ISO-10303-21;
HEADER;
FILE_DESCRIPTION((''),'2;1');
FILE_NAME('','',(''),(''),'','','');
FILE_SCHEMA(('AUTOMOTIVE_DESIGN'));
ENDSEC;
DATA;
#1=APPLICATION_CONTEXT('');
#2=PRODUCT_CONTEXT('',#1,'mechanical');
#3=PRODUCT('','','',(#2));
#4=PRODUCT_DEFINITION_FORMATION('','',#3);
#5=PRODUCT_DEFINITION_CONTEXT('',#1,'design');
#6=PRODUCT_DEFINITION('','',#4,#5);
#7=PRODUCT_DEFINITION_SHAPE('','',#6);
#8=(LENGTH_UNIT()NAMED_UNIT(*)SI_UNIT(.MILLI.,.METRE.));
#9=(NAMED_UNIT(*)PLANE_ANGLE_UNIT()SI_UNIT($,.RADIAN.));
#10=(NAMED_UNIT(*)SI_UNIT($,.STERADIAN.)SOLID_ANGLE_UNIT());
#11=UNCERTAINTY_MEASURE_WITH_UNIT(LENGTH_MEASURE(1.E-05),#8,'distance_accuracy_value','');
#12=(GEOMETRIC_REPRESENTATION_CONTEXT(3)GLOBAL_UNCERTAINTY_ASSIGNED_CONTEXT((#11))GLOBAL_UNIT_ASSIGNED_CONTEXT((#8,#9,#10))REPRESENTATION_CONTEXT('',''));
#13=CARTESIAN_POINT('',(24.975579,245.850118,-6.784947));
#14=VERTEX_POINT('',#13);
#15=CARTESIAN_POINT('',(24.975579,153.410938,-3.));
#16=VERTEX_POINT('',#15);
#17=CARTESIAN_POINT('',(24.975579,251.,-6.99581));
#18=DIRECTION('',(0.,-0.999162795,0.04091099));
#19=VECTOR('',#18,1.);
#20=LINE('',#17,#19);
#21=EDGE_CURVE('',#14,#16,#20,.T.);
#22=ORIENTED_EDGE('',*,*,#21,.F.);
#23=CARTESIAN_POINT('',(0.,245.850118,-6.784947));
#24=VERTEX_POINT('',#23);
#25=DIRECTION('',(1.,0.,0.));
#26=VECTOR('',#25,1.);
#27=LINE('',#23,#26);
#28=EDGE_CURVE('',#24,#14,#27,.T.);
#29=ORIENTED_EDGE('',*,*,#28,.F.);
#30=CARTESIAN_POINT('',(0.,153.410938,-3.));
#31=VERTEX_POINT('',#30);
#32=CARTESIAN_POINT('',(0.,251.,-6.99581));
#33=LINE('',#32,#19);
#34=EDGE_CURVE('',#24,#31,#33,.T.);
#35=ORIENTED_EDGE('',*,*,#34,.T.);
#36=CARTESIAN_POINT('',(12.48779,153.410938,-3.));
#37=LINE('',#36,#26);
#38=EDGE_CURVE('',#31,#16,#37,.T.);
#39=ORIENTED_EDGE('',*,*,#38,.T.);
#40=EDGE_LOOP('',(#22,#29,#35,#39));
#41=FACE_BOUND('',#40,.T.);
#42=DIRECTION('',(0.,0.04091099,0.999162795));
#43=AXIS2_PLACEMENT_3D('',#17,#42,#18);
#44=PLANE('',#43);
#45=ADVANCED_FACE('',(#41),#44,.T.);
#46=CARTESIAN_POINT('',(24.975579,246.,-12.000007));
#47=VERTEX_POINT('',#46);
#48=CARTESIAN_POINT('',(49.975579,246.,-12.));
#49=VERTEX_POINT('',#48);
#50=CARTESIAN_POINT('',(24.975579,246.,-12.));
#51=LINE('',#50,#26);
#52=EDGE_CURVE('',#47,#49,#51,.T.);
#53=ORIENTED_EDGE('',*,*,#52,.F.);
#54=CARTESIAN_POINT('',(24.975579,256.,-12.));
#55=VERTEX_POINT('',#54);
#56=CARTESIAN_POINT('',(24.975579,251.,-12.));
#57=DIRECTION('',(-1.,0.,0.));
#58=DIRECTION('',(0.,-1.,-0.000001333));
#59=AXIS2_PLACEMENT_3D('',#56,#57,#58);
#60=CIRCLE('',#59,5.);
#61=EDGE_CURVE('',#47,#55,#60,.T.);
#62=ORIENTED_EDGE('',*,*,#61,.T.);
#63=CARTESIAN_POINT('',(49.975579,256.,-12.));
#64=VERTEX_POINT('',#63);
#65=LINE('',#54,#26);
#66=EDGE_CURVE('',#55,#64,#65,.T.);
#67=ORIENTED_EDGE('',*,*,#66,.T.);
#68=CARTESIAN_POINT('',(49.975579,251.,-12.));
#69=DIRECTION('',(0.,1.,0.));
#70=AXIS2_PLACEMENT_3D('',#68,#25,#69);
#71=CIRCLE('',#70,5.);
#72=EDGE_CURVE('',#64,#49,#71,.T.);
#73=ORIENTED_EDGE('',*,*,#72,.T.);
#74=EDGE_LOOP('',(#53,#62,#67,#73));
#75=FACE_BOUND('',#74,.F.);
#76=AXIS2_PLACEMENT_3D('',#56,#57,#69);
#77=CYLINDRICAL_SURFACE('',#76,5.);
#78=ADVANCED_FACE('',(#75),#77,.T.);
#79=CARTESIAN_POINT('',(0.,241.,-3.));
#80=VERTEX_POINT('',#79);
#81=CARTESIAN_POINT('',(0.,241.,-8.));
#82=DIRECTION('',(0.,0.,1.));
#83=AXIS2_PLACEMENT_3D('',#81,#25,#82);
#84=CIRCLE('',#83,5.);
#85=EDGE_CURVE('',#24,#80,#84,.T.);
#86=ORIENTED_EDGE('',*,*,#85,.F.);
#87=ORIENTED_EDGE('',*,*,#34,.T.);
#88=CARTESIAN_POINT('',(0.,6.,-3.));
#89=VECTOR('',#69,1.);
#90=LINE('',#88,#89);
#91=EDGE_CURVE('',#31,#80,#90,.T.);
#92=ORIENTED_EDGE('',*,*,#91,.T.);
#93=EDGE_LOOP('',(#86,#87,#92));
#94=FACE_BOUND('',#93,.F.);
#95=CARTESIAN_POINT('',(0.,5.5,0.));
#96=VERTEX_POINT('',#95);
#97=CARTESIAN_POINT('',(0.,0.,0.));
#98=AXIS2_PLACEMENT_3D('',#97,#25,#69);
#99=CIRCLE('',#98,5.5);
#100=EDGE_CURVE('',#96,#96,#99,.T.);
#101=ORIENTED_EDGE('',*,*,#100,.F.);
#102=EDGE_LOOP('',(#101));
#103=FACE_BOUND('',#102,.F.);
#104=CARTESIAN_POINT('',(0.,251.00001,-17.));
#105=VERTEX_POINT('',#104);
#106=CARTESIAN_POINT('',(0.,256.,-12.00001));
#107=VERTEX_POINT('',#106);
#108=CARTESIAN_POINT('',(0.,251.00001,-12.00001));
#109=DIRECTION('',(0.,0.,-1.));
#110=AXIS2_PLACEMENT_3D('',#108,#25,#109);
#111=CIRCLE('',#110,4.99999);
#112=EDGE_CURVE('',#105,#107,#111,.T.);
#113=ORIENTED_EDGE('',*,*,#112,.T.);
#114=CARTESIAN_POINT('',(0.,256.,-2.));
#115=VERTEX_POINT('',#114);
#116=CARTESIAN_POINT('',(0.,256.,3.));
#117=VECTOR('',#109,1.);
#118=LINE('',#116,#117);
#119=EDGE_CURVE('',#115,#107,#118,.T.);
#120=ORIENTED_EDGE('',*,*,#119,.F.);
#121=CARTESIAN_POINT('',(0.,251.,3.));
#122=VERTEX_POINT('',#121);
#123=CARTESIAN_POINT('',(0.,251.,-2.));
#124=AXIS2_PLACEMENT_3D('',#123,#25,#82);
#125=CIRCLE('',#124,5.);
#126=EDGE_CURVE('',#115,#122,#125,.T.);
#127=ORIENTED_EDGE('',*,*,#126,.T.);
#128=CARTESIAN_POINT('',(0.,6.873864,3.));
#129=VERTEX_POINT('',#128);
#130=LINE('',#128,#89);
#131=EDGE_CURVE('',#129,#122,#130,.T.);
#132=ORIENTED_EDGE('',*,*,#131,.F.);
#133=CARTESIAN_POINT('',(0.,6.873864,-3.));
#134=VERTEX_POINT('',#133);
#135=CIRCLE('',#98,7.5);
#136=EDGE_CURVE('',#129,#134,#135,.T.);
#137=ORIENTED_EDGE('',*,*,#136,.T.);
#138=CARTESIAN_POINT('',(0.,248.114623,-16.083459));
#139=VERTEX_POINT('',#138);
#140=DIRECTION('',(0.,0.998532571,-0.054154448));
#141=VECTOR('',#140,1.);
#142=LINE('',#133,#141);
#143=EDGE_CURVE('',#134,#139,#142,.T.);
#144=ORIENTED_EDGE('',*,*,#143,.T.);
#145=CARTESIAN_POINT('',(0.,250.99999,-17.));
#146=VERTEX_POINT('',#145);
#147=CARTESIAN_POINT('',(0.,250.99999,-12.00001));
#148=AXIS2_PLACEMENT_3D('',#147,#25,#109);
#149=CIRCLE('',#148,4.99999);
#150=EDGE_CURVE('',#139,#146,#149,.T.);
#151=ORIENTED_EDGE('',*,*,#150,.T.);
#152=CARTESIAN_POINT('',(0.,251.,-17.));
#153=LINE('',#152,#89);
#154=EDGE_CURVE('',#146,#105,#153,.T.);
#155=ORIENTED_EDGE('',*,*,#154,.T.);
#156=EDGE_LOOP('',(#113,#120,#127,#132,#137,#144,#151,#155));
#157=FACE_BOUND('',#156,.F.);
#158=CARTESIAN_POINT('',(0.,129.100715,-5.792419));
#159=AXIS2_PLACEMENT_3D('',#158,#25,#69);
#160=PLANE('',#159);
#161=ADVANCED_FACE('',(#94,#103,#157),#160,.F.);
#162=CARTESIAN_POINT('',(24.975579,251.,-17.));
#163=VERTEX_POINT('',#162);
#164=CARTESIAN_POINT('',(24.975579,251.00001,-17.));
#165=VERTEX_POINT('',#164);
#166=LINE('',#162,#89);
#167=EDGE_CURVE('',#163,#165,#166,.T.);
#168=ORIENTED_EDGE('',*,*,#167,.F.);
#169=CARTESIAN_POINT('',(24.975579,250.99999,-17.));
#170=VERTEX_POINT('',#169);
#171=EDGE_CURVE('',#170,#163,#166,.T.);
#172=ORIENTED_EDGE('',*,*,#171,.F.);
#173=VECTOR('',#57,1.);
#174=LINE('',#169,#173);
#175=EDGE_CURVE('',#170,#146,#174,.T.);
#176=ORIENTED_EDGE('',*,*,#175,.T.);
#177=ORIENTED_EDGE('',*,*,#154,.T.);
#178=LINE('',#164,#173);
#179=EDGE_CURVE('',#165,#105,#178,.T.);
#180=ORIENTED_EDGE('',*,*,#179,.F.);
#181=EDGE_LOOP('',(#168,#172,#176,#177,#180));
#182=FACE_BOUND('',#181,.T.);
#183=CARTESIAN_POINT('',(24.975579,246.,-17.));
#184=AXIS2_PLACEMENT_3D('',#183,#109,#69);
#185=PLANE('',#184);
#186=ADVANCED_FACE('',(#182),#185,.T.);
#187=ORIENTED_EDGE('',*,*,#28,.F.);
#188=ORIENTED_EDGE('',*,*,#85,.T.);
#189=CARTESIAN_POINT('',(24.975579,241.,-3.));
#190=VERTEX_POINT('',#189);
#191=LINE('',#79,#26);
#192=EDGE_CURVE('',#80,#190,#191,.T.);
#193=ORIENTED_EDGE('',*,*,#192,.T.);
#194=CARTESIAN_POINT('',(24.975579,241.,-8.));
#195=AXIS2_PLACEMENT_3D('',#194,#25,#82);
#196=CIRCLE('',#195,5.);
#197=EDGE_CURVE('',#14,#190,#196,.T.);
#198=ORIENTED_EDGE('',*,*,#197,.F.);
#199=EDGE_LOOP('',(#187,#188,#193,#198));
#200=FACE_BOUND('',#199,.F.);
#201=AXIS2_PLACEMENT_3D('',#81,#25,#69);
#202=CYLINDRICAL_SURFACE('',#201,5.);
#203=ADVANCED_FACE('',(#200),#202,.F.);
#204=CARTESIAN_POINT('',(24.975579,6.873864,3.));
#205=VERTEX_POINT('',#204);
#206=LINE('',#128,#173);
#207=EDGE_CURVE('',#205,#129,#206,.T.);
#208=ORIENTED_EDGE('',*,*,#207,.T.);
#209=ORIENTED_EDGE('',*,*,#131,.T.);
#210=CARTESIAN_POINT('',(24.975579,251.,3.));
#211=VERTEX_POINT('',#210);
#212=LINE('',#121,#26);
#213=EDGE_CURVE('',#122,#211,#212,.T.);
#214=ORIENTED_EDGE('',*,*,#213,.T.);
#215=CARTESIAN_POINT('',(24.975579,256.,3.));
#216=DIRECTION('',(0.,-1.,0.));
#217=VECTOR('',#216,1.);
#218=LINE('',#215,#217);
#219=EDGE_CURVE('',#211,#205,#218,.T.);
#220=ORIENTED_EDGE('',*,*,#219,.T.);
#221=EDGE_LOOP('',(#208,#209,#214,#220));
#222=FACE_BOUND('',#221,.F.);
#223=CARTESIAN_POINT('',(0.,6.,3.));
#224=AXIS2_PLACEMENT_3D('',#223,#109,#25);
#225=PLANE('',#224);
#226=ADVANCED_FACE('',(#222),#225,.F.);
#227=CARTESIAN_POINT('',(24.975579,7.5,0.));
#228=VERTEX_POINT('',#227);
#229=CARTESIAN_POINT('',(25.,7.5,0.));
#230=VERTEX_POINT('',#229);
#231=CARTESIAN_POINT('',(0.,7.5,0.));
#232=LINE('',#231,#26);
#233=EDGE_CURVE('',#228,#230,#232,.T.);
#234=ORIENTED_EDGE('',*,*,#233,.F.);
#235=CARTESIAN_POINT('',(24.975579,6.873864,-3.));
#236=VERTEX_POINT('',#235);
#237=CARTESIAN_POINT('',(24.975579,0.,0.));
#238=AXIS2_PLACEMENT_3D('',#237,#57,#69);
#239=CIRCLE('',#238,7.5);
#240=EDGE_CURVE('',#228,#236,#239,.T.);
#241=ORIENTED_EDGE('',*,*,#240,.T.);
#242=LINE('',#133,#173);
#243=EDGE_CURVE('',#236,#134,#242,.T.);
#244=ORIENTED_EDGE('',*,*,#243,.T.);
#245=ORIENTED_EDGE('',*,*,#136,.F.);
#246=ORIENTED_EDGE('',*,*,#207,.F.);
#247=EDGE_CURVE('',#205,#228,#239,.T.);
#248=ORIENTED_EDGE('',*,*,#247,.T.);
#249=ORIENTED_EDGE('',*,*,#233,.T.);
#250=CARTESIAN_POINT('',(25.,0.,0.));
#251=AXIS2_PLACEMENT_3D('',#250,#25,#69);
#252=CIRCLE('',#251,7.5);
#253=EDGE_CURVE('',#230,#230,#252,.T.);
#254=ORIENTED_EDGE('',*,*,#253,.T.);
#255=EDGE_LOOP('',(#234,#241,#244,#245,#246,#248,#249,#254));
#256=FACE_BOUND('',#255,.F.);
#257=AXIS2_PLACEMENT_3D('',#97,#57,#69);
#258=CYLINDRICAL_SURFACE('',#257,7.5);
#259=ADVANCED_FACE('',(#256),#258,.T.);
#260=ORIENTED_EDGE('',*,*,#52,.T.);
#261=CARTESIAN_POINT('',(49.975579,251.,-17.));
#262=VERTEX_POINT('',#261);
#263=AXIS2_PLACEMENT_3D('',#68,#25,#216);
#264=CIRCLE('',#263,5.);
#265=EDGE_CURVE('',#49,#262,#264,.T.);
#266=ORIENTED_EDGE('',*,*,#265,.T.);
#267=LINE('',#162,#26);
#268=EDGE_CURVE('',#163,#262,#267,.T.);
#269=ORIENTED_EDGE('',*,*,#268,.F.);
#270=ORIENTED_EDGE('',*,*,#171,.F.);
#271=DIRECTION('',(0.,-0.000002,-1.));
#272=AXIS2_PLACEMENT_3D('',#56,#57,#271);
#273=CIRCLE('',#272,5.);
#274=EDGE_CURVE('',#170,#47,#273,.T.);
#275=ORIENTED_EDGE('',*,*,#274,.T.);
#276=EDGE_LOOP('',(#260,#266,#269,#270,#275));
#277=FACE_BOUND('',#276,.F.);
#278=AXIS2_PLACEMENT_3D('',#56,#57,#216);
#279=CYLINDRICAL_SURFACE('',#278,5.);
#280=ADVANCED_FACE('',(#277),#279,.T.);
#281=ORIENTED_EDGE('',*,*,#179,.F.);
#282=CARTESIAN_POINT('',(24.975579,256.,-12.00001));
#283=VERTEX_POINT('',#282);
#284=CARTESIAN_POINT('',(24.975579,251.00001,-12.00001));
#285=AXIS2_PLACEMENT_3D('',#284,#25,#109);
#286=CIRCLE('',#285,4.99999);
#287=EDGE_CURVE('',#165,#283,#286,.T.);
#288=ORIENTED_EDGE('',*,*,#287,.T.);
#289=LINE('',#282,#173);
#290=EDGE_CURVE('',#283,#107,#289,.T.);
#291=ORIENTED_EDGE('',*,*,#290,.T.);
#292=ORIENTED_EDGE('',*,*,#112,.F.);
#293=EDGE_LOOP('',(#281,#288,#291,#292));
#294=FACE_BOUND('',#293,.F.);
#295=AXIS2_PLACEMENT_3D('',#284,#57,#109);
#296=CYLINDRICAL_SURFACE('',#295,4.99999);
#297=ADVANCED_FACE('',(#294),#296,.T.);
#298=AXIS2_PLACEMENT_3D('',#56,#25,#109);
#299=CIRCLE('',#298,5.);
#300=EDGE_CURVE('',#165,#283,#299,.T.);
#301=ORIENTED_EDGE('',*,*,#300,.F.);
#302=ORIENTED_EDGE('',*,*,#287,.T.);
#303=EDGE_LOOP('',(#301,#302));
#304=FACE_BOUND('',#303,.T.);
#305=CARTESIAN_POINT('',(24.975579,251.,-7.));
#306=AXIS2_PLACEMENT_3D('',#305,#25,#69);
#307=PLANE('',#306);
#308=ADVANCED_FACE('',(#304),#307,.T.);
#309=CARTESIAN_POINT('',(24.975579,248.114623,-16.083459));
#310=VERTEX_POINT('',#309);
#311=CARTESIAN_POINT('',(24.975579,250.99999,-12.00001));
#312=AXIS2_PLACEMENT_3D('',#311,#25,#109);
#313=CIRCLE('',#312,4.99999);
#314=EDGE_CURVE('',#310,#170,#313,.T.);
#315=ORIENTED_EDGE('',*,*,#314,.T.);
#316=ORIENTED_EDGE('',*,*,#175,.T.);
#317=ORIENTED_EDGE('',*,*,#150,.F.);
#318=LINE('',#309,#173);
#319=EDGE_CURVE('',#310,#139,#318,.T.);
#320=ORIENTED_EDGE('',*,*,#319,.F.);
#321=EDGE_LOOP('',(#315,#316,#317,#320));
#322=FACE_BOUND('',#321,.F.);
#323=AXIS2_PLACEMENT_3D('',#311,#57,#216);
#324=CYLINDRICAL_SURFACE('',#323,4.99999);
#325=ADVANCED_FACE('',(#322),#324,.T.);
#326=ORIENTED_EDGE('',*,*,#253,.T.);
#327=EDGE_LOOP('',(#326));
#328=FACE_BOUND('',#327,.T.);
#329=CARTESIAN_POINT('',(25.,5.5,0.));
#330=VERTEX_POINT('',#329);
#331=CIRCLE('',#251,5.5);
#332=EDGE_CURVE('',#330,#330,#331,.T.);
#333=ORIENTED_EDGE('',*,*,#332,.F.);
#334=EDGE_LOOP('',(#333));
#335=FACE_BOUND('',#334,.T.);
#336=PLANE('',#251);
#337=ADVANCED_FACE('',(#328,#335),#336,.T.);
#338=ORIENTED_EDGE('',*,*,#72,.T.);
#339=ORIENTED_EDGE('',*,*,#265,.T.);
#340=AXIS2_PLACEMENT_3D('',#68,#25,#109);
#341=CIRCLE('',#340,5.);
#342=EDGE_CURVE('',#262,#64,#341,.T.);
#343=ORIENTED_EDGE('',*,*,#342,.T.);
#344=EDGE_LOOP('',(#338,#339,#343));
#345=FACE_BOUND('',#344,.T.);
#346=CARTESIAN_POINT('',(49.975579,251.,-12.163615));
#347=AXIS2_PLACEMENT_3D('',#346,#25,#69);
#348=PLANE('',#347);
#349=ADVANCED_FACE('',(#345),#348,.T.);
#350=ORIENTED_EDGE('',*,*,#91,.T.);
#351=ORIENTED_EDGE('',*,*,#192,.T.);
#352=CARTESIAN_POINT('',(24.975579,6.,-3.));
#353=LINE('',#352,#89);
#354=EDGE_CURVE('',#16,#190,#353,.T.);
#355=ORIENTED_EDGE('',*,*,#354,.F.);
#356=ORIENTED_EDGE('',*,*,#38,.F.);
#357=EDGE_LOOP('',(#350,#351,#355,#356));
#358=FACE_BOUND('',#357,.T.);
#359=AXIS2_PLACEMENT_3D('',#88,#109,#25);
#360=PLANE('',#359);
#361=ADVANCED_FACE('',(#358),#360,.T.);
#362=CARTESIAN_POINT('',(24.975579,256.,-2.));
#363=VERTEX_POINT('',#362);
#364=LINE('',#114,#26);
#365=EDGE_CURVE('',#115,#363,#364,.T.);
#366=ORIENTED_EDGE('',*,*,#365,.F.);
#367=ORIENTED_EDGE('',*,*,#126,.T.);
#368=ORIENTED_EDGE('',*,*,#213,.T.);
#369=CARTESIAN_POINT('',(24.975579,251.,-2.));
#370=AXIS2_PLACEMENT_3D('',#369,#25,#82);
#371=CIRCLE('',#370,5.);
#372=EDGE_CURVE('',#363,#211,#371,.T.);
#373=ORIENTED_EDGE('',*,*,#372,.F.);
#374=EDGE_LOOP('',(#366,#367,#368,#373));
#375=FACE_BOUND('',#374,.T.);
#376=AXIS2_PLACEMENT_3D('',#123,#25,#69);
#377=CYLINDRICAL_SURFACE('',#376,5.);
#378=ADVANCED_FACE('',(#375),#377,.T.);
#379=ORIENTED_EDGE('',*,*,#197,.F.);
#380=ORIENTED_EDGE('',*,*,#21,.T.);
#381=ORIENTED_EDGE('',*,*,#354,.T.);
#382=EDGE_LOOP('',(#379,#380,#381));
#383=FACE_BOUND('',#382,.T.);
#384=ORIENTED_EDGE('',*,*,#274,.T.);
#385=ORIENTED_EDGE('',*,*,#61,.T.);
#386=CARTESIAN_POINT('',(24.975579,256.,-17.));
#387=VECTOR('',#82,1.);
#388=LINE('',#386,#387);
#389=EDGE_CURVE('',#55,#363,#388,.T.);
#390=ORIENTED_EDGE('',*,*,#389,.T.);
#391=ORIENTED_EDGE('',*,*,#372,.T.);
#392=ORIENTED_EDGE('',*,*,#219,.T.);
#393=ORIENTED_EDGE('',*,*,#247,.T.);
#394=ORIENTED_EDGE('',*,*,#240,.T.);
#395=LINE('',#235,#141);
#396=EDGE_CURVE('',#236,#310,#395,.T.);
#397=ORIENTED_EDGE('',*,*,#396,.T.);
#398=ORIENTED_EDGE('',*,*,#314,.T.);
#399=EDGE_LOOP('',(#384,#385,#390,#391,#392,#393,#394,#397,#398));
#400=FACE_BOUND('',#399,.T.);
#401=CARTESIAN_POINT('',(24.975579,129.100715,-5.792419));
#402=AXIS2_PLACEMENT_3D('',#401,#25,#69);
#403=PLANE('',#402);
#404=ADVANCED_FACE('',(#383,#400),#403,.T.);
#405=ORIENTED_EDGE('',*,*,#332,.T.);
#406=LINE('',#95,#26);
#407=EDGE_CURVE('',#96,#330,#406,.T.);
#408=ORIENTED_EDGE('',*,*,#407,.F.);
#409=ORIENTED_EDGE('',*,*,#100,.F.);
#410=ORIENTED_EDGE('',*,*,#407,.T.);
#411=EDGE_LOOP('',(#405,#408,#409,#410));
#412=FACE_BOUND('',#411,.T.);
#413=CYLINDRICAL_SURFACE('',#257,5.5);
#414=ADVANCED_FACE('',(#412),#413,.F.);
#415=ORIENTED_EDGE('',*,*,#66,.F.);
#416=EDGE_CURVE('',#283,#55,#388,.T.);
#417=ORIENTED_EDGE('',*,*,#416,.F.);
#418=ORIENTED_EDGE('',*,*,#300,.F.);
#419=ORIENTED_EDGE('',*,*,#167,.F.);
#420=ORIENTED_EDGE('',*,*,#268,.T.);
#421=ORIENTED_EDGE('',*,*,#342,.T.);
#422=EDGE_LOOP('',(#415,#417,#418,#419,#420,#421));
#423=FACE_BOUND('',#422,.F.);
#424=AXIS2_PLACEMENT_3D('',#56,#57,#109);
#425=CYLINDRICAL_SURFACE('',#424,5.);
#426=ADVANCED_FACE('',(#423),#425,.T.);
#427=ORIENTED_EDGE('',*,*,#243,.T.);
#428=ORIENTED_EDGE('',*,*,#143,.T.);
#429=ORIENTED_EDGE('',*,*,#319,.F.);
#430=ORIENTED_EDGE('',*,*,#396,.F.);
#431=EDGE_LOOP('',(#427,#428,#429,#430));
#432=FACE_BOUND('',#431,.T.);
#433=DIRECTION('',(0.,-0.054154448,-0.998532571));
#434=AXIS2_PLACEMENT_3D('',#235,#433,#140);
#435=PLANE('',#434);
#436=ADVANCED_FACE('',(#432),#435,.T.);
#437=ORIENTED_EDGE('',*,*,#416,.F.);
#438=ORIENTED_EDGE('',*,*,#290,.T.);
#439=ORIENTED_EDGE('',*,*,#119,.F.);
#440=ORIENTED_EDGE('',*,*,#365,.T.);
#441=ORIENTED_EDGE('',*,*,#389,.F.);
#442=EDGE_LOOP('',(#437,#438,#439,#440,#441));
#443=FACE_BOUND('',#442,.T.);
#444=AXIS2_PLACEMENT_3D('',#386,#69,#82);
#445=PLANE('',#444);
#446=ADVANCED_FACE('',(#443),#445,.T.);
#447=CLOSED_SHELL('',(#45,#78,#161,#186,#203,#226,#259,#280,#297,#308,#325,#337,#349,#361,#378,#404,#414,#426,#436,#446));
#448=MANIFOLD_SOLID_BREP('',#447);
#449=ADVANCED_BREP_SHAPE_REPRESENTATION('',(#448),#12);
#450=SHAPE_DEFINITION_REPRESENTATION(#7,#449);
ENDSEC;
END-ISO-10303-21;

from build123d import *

# Parameters (mm, degrees)
F0_R      = 7.5
F0_R_2    = 5.5
F1_DEPTH  = 25
F3_W      = 24.975579232
F3_H      = 6
F4_DEPTH  = 250
F5_W      = 10
F5_H      = 20
F6_DEPTH  = 24.975579232
F7_R      = 5
F8_R      = 4.99999
F10_DEPTH = 25
F12_DEPTH = 24.975579232


# Not quite as in the source:
# - a fillet or chamfer is up to 0.001 mm smaller than in the source, because OpenCascade refuses the exact size


with BuildPart() as f1:
    # F0 (on Right) → F1 (new body)
    with BuildSketch(Plane.YZ):
        Circle(F0_R)
        Circle(F0_R_2, mode=Mode.SUBTRACT)
    extrude(amount=F1_DEPTH)

    # F3 (on offset) → F4 (join)
    with BuildSketch(Plane.XZ.offset(-6)):
        with Locations((12.487789616, 0)):
            Rectangle(F3_W, F3_H)
    extrude(amount=-F4_DEPTH)

    # F5 (on face) → F6 (join, through all)
    with BuildSketch(Plane.YZ.offset(24.975579232)):
        with Locations((251, -7)):
            Rectangle(F5_W, F5_H)
    extrude(amount=-F6_DEPTH)

    # F7
    f7_edges = [f1.edges().sort_by_distance(p)[0] for p in [
        (12.48779, 256, 3),
        (12.48779, 246, -3),
    ]]
    fillet(f7_edges, radius=F7_R)

    # F8 (radius 5 in the source; OpenCascade refuses exactly that, so slightly less here)
    f8_edges = [f1.edges().sort_by_distance(p)[0] for p in [
        (12.48779, 246, -17),
        (12.48779, 256, -17),
    ]]
    fillet(f8_edges, radius=F8_R)

    # F9 (on face) → F10 (join)
    with BuildSketch(Plane.YZ.offset(24.975579232)):
        with BuildLine():
            ThreePointArc((256, -12), (251, -7), (246, -12))
            ThreePointArc((246, -12), (247.4644660941, -15.5355339059), (251, -17))
            ThreePointArc((251, -17), (254.5355339059, -15.5355339059), (256, -12))
        make_face()
    extrude(amount=F10_DEPTH)

    # F11 (on face) → F12 (join, through all)
    with BuildSketch(Plane.YZ.offset(24.975579232)):
        Polygon((6.8738635424, -3), (248.2517808676, -16.0908978432), (251, -6.9958104675), (6.8738635424, 3), align=None)
    extrude(amount=-F12_DEPTH)


solid = f1.part
